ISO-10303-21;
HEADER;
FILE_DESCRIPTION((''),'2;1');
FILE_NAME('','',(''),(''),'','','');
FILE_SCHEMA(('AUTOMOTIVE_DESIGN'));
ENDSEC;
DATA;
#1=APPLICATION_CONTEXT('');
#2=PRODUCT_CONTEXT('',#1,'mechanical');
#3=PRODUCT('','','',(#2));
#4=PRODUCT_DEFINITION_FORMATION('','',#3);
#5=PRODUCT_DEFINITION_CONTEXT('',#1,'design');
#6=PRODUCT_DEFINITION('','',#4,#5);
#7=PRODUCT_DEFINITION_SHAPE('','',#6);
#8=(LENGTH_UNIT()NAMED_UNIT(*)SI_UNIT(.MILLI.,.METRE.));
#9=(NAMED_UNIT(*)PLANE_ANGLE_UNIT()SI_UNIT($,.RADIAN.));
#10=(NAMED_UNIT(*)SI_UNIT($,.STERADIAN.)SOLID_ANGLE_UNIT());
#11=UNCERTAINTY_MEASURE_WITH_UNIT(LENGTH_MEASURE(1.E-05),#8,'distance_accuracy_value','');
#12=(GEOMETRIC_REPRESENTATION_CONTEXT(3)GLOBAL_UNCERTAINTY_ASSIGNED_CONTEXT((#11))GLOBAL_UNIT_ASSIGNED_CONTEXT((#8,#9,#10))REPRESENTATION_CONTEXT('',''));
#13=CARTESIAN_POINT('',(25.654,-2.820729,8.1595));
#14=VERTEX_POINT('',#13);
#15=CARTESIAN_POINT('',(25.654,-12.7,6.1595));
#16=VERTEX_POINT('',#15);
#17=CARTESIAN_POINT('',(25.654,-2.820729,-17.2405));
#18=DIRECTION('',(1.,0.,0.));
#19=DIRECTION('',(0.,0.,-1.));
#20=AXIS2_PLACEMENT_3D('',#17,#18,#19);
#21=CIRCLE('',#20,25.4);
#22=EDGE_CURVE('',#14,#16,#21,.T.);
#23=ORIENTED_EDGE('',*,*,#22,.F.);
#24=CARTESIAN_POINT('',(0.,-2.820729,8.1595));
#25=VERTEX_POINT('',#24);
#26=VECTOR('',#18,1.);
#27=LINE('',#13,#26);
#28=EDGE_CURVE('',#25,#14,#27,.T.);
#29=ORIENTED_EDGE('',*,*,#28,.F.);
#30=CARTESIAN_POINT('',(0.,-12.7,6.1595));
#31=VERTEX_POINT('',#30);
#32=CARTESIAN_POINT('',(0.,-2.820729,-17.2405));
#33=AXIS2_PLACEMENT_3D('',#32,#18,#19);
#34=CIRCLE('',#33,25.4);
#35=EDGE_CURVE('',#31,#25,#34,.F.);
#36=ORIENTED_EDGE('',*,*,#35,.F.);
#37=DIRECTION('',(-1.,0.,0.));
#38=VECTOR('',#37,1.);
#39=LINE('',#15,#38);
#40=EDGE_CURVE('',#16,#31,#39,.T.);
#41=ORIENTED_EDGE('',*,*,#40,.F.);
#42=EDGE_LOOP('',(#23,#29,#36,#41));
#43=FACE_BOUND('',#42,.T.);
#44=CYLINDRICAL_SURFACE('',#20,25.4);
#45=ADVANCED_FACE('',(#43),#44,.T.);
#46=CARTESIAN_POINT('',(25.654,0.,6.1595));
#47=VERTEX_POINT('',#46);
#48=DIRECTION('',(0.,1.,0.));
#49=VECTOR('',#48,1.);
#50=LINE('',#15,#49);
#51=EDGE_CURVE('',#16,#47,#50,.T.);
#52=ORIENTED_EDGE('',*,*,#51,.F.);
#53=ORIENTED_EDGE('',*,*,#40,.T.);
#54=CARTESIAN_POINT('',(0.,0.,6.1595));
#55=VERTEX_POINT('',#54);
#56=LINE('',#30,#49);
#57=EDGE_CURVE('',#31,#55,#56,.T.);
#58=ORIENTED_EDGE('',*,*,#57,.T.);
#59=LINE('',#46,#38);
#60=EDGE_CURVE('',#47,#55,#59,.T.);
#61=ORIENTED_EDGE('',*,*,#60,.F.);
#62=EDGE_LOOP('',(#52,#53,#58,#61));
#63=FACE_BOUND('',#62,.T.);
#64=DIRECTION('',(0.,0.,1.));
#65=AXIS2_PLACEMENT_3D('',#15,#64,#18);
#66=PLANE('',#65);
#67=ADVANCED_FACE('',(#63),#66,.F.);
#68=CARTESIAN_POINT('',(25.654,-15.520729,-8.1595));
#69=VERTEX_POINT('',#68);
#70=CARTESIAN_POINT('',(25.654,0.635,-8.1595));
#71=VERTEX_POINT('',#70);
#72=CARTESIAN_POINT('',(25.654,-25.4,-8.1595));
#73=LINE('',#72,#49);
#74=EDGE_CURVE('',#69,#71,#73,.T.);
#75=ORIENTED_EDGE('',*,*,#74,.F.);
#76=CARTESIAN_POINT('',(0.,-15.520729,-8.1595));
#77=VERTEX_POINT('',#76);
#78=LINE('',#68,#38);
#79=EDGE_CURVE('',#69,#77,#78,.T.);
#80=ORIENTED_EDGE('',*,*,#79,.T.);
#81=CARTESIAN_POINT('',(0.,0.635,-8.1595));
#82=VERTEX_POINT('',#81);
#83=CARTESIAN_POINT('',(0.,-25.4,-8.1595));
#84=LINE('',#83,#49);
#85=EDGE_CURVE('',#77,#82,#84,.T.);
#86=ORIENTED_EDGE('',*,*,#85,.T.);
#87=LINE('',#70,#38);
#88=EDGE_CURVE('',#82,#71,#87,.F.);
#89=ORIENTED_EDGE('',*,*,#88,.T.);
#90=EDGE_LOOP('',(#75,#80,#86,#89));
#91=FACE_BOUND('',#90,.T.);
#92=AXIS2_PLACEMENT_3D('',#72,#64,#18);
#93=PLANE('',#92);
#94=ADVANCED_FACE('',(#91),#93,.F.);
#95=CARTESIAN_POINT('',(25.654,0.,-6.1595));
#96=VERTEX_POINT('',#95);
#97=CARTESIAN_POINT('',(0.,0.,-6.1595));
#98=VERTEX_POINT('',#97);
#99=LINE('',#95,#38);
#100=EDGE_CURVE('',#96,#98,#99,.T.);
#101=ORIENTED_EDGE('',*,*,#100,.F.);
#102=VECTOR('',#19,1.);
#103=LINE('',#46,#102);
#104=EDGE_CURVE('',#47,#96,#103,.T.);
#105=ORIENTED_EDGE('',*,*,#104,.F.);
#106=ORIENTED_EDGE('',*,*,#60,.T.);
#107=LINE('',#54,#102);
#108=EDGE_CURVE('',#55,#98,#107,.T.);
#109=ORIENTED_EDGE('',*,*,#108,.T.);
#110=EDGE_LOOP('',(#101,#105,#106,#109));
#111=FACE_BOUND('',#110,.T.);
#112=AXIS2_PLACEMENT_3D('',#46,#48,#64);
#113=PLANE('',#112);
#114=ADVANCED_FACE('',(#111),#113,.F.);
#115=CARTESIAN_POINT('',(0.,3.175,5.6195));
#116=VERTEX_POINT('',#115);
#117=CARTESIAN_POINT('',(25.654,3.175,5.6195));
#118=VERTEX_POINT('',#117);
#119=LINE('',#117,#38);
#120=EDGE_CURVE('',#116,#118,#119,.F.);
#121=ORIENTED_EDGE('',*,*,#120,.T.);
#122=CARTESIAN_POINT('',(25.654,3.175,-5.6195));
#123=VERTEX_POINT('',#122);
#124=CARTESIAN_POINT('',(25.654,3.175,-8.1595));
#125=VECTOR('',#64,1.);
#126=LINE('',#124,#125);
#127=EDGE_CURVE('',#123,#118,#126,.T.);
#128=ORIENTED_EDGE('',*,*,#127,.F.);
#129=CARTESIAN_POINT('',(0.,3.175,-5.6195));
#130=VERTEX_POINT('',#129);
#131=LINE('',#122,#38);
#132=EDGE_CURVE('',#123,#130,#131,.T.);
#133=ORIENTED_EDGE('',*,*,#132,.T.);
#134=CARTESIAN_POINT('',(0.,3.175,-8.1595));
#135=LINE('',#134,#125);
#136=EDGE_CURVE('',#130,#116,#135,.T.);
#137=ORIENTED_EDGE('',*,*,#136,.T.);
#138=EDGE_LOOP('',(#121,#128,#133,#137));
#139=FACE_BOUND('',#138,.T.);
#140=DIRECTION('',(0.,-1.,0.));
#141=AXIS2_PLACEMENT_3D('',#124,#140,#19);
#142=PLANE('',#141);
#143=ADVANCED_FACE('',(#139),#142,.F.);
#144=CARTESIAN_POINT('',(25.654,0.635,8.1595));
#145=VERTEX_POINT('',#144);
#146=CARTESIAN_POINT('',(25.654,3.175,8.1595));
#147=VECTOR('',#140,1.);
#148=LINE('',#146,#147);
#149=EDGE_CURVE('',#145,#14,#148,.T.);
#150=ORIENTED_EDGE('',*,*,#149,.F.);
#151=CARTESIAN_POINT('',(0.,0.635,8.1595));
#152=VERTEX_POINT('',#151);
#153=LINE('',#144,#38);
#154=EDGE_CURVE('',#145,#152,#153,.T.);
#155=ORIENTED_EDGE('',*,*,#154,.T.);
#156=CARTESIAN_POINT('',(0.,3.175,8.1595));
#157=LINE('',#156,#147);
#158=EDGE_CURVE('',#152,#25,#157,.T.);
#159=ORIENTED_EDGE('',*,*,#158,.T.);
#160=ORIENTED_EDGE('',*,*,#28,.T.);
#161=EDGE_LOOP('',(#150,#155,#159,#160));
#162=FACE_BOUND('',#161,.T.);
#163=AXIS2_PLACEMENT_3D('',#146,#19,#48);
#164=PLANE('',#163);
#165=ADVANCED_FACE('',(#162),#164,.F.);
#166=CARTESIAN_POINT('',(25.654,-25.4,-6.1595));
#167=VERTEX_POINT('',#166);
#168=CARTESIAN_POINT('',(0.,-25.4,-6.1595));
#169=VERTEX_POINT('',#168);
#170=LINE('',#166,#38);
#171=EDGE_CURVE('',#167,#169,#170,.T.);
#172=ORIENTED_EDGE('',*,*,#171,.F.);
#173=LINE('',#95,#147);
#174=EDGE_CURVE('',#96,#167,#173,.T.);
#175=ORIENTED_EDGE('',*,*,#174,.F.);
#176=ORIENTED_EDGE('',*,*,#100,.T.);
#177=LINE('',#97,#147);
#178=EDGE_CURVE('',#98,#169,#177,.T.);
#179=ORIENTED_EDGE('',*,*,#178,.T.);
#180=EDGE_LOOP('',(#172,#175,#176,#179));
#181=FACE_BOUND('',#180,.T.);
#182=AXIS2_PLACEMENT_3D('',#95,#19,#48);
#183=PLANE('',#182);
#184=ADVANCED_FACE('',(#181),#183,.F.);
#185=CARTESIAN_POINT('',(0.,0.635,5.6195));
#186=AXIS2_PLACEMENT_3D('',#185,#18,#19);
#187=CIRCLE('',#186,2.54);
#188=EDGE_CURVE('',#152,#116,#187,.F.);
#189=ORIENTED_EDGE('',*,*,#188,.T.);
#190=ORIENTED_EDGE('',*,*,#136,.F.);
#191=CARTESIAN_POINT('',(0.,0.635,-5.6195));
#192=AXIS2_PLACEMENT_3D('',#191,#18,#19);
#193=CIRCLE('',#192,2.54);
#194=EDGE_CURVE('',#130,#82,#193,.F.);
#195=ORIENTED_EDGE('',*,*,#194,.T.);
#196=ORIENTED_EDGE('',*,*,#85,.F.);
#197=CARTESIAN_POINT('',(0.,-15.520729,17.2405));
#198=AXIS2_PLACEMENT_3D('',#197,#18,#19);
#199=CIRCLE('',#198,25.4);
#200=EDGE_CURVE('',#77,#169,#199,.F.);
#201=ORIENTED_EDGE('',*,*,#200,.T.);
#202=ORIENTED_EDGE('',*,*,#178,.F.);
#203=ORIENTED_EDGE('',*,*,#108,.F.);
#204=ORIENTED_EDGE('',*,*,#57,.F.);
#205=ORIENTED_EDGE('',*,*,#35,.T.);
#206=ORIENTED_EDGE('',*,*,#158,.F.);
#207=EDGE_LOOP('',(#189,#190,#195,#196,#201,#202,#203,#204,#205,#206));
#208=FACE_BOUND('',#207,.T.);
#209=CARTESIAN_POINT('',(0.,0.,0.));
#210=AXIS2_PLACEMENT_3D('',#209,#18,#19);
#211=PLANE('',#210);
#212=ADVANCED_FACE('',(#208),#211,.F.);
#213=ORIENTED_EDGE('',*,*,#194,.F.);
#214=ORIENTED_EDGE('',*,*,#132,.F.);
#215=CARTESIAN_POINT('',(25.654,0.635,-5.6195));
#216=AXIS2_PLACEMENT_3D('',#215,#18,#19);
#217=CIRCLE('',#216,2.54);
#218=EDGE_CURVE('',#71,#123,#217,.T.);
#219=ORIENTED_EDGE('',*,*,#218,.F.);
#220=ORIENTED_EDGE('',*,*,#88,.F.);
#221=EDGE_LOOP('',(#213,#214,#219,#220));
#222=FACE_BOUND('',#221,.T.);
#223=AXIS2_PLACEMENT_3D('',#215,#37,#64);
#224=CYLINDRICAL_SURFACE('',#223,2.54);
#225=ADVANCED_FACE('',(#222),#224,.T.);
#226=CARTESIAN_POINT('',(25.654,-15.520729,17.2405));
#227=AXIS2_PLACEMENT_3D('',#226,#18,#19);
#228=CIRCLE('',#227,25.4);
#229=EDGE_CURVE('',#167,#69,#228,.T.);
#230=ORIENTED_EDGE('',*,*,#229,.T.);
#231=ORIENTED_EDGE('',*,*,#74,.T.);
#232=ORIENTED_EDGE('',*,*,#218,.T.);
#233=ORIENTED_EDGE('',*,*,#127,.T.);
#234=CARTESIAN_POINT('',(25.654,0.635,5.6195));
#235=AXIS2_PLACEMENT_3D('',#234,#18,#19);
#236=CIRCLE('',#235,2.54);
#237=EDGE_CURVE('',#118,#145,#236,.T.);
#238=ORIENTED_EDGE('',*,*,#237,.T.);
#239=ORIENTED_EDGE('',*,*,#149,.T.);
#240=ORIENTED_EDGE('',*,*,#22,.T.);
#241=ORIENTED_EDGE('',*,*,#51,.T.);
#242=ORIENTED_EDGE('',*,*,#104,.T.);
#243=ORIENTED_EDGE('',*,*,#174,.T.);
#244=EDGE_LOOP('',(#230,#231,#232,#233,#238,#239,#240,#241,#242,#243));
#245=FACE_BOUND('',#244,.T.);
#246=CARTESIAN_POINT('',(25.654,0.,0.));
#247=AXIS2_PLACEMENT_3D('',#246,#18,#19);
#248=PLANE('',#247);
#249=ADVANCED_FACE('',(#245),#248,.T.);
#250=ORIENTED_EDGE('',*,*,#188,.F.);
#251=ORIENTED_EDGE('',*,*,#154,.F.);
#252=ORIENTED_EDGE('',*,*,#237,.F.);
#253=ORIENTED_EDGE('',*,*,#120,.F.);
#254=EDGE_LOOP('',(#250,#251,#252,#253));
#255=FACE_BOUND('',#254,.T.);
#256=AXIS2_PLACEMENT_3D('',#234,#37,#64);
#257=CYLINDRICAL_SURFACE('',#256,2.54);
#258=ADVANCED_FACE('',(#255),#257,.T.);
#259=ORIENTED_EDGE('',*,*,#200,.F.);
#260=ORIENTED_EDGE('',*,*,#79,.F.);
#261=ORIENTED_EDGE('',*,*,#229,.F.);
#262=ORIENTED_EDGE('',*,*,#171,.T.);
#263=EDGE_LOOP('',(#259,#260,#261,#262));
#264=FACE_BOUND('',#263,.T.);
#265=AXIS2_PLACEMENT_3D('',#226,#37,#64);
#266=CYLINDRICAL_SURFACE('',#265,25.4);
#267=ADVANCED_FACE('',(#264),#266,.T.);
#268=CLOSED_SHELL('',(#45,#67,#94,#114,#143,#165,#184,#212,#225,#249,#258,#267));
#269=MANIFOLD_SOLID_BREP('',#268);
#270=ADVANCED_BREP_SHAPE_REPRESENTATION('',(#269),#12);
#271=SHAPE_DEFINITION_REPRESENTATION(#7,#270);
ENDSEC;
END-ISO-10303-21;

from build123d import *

# Parameters (mm, degrees)
BOSS_EXTRUDE1_DEPTH = 25.654
FILLET1_R           = 25.4
FILLET2_R           = 2.54


with BuildPart() as part:
    # Sketch1 → Boss-Extrude1 (new body)
    with BuildSketch(Plane(origin=(0, 0, 0), x_dir=(0, 0, -1), z_dir=(1, 0, 0))):
        Polygon((-8.1595, -12.7), (-6.1595, -12.7), (-6.1595, 0), (6.1595, 0), (6.1595, -25.4), (8.1595, -25.4), (8.1595, 3.175), (-8.1595, 3.175), align=None)
    extrude(amount=BOSS_EXTRUDE1_DEPTH)

    # Fillet1
    # the kernel refuses this fillet: 25.4 mm, written as the material it takes off along each edge
    with BuildSketch(Plane(origin=(-24.69817807, -12.7, 8.1595), x_dir=(0, 0, -1), z_dir=(1, 0, 0))) as fillet1_piece_1:
        with BuildLine():
            CenterArc((25.4, 9.879271228), FILLET1_R, 180, 22.889037196)
            Line((0, 9.879271228), (-0.508, 9.879271228))
            Line((-0.508, 9.879271228), (-0.508, 0))
            Line((-0.508, 0), (0, -0.508))
            ThreePointArc((0, -0.508), (1, -0.508), (1.532, -0.197585425))
            Line((1.532, -0.197585425), (2, 0))
        make_face()
    extrude(amount=75.050356141, mode=Mode.SUBTRACT)
    with BuildSketch(Plane(origin=(-24.69817807, -25.4, -8.1595), x_dir=(0, 0, 1), z_dir=(1, 0, 0))) as fillet1_piece_2:
        with BuildLine():
            CenterArc((25.4, -9.879271228), FILLET1_R, 157.110962804, 22.889037196)
            Line((0, -9.879271228), (-0.508, -9.879271228))
            Line((-0.508, -9.879271228), (-0.508, 0))
            Line((-0.508, 0), (0, 0.508))
            ThreePointArc((0, 0.508), (1, 0.508), (1.532, 0.197585425))
            Line((1.532, 0.197585425), (2, 0))
        make_face()
    extrude(amount=75.050356141, mode=Mode.SUBTRACT)

    # Fillet2
    fillet2_edges = [part.edges().sort_by_distance(p)[0] for p in [
        (12.827, 3.175, 8.1595),
        (12.827, 3.175, -8.1595),
    ]]
    fillet(fillet2_edges, radius=FILLET2_R)


solid = part.part
